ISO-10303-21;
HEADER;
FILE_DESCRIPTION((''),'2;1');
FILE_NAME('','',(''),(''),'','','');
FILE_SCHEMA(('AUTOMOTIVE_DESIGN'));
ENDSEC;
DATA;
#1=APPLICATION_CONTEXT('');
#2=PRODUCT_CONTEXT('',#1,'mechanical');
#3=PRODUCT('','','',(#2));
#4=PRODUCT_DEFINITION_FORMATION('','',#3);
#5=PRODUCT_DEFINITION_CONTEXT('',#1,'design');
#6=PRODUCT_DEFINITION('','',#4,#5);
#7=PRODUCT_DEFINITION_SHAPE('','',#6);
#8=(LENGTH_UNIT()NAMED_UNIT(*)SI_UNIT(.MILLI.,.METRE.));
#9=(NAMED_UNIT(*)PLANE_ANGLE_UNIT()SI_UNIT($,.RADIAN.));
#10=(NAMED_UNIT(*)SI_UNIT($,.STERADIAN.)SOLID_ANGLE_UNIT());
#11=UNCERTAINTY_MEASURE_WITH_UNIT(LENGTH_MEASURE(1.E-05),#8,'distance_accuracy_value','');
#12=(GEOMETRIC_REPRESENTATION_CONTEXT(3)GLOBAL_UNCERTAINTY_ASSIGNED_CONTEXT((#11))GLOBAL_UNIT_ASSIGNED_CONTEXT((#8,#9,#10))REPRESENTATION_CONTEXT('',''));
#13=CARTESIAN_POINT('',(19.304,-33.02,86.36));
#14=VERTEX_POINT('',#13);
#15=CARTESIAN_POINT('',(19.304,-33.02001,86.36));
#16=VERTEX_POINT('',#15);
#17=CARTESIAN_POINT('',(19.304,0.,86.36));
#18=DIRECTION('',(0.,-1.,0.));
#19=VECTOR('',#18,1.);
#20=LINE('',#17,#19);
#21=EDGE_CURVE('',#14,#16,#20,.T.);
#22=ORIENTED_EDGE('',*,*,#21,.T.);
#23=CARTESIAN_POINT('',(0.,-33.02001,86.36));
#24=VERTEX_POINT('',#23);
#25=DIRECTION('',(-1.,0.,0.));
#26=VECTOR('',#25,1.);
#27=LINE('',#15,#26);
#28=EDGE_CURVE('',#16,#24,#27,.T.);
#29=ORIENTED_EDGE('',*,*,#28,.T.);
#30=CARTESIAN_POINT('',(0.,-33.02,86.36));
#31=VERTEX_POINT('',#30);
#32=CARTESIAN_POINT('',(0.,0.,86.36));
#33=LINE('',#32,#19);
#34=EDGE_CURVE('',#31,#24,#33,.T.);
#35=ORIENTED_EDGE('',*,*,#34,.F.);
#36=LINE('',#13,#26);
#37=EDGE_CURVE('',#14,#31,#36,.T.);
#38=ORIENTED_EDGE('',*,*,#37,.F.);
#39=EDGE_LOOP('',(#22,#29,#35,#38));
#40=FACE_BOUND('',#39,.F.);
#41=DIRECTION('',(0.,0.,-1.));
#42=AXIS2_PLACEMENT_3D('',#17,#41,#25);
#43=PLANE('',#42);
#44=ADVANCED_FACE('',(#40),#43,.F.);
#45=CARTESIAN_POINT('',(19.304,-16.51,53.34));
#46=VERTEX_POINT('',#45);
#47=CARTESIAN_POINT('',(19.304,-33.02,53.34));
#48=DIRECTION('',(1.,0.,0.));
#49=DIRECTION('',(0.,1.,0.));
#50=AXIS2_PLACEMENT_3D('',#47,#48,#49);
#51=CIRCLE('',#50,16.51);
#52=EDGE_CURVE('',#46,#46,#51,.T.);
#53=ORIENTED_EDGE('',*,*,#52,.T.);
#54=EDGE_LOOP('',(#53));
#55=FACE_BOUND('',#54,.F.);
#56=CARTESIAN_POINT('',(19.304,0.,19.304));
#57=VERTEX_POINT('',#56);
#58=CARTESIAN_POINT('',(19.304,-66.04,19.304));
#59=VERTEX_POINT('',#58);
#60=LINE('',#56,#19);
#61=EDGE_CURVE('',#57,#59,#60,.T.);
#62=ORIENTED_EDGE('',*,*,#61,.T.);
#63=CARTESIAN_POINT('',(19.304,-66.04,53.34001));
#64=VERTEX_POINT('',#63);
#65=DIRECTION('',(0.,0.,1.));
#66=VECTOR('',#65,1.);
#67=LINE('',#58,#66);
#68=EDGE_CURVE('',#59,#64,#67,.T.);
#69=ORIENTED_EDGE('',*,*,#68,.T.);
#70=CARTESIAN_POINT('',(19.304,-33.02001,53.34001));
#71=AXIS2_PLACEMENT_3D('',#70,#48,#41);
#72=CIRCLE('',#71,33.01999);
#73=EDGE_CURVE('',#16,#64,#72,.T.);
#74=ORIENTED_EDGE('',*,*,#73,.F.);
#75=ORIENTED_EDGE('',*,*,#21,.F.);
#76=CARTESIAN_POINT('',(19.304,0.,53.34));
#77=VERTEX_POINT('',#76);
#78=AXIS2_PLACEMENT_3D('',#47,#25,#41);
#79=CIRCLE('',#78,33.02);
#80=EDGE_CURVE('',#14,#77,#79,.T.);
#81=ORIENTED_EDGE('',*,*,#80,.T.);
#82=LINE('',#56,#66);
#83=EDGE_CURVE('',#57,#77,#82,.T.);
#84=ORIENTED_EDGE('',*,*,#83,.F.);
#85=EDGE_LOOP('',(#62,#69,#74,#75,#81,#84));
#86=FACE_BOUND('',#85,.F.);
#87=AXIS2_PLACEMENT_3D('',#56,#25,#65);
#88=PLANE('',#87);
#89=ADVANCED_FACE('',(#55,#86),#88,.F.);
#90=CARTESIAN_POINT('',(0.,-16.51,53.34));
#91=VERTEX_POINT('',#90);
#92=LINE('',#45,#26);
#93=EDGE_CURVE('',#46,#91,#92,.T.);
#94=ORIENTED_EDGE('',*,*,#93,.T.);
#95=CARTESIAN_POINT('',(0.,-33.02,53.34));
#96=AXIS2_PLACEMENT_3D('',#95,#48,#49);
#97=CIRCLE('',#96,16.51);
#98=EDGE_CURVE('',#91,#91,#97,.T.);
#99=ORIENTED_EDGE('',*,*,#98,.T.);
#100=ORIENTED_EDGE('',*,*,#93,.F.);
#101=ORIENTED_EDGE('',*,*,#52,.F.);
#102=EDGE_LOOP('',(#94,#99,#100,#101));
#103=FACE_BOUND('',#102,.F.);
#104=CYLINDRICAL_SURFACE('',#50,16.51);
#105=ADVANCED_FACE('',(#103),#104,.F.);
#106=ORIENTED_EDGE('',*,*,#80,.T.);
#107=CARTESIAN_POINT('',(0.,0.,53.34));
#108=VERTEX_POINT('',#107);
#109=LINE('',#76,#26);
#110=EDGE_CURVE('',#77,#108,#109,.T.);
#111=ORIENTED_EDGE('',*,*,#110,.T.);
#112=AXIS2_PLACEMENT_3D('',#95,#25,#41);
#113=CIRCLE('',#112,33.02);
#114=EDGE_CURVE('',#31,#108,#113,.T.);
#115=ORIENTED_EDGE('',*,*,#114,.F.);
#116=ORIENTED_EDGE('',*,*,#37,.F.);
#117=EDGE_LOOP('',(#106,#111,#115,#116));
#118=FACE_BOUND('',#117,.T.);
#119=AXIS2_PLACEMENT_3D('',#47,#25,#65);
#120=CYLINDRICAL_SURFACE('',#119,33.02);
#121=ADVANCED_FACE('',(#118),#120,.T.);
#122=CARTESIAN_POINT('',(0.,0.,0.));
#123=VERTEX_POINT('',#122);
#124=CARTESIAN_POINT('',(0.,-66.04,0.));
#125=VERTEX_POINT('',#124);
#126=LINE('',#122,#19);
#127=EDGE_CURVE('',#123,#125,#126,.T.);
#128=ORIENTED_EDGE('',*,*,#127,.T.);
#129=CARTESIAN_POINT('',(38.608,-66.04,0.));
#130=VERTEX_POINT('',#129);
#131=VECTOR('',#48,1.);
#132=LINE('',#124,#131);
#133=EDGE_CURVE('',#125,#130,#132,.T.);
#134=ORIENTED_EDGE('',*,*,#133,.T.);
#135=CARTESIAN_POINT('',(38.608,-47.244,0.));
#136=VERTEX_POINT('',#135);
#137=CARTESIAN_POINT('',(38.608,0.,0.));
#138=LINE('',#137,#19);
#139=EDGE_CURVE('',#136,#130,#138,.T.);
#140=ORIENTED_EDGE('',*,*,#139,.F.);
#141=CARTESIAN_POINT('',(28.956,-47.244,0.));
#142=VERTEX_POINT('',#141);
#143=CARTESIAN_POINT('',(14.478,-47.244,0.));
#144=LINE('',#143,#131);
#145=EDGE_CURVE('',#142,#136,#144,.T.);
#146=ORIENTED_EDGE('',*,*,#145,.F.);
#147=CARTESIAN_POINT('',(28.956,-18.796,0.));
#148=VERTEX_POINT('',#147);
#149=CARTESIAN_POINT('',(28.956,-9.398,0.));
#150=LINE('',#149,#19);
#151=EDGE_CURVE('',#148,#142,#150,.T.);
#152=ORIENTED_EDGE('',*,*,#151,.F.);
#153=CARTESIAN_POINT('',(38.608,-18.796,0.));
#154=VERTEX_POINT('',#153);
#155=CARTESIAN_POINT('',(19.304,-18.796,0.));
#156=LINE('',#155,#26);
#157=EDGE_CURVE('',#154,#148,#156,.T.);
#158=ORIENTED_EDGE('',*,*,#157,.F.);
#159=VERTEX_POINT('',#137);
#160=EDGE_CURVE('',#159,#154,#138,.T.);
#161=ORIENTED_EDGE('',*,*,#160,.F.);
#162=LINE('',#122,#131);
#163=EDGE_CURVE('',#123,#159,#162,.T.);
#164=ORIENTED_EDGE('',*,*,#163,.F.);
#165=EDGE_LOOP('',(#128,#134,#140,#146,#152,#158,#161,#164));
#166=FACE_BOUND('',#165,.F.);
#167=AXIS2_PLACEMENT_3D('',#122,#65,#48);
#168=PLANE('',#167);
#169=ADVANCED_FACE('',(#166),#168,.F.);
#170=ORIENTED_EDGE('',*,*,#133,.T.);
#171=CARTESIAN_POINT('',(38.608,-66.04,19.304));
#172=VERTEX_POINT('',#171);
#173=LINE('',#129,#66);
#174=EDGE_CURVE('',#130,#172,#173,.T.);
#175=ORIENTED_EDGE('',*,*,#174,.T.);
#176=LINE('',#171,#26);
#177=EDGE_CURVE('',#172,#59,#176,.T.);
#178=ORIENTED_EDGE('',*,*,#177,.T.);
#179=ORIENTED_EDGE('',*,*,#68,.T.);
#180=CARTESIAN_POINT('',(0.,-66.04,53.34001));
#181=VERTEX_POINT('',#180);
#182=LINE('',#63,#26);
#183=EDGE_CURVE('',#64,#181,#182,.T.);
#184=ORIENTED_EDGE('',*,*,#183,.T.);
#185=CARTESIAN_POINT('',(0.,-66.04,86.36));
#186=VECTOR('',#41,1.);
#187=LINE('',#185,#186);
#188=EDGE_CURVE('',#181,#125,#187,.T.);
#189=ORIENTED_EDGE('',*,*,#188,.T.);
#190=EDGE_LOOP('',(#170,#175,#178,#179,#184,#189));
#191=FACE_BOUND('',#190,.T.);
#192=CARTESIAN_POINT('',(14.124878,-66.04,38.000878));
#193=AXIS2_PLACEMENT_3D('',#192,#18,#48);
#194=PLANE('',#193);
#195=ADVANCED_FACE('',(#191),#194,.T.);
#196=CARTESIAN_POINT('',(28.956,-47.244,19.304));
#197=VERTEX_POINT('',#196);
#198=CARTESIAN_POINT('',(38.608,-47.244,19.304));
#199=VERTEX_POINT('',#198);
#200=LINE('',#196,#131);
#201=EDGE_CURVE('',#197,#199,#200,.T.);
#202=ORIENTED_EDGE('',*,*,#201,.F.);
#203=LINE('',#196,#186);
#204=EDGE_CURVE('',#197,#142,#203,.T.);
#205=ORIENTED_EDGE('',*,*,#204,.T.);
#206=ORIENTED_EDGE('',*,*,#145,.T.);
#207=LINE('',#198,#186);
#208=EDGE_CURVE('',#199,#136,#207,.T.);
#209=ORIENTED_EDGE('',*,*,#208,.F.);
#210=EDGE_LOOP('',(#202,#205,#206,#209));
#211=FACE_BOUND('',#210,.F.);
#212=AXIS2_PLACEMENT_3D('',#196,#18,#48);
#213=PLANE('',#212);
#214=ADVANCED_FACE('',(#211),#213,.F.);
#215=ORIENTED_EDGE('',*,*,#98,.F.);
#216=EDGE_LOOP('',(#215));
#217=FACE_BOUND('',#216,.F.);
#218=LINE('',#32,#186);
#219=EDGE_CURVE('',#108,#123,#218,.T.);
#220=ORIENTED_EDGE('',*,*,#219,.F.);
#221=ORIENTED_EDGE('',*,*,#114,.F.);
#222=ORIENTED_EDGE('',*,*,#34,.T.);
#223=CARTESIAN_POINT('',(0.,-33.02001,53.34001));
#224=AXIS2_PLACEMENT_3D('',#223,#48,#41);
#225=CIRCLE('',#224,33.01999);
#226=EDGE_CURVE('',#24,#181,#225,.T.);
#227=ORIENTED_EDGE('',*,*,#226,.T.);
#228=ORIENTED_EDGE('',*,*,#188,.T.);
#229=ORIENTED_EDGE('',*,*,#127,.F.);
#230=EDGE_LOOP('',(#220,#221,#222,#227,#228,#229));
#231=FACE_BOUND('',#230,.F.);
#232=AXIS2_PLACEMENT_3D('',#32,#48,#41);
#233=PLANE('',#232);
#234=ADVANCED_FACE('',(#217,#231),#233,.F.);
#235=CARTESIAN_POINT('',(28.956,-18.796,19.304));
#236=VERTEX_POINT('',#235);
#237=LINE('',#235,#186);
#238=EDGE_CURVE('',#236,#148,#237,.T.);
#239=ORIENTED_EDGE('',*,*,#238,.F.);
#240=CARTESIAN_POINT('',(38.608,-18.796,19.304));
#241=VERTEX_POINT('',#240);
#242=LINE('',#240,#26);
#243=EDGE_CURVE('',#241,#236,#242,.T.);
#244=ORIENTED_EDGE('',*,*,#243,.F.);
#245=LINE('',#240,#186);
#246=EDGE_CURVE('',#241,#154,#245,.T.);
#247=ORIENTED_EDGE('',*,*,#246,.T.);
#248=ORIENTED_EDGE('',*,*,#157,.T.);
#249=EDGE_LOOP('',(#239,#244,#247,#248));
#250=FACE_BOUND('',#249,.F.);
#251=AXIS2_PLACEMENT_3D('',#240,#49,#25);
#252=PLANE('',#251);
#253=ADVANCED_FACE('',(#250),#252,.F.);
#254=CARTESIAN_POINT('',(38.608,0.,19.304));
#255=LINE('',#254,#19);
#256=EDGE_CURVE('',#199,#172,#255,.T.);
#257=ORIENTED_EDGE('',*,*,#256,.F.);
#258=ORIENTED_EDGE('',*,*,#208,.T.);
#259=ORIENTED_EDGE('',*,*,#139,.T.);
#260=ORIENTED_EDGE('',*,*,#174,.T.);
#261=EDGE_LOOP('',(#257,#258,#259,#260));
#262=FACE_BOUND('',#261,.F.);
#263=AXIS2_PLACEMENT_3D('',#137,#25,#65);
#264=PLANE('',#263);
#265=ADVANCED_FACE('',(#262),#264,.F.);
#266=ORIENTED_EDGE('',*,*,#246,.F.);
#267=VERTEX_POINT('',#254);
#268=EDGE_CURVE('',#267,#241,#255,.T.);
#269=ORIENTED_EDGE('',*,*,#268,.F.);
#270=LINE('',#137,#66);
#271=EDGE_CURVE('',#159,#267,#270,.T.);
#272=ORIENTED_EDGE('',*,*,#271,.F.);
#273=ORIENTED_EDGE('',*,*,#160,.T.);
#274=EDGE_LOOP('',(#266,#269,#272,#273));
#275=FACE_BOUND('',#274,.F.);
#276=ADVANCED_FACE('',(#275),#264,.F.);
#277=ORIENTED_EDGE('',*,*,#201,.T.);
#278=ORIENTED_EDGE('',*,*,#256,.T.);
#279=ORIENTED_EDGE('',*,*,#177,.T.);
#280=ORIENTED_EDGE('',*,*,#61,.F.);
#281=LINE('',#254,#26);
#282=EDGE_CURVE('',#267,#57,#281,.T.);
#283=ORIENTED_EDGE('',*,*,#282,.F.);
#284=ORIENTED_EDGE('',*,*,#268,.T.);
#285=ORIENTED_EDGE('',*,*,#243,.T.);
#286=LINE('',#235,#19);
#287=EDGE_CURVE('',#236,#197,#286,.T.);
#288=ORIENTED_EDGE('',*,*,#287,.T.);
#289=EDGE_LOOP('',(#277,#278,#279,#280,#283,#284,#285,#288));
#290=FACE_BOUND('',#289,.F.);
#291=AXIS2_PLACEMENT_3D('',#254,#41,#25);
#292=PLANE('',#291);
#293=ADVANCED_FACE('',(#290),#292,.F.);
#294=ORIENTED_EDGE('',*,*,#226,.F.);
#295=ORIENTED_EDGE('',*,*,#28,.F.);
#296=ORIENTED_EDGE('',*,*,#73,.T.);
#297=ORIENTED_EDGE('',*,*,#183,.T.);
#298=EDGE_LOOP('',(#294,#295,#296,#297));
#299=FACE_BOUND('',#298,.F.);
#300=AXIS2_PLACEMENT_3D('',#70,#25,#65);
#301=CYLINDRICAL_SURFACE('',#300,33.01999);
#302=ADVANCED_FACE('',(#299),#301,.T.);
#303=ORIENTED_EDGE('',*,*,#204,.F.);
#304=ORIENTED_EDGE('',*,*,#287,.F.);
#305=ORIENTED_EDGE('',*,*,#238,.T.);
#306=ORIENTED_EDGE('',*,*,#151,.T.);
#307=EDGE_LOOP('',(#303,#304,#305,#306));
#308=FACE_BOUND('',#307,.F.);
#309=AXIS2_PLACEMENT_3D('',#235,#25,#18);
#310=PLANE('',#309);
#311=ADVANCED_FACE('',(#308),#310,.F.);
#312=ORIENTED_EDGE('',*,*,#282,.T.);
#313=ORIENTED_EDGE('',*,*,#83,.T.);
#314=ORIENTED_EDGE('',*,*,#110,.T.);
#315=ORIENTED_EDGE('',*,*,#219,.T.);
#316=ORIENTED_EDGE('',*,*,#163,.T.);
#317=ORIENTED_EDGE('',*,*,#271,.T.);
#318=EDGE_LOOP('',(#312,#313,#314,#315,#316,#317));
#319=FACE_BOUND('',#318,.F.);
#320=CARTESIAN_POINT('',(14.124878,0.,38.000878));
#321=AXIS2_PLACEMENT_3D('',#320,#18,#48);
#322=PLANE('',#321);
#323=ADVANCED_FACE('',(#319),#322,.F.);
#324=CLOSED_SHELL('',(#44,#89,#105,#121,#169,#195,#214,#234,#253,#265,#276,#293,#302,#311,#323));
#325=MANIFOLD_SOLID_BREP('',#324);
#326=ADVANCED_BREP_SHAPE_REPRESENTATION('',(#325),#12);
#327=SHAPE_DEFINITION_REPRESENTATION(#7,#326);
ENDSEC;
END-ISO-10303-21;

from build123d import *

# Parameters (mm, degrees)
F1_DEPTH = 66.04
F2_R     = 33.02
F3_R     = 33.01999
F4_R     = 16.51
F5_DEPTH = 34.544
F7_DEPTH = 25.4


# Not quite as in the source:
# - a fillet or chamfer is up to 0.001 mm smaller than in the source, because OpenCascade refuses the exact size


with BuildPart() as f1:
    # F0 (on Front) → F1 (new body)
    with BuildSketch(Plane.XZ):
        Polygon((0, 86.36), (0, 0), (38.608, 0), (38.608, 19.304), (19.304, 19.304), (19.304, 86.36), align=None)
    extrude(amount=F1_DEPTH)

    # F2
    f2_edges = [f1.edges().sort_by_distance(p)[0] for p in [
        (9.652, 0, 86.36),
    ]]
    fillet(f2_edges, radius=F2_R)

    # F3 (radius 33.02 in the source; OpenCascade refuses exactly that, so slightly less here)
    f3_edges = [f1.edges().sort_by_distance(p)[0] for p in [
        (9.652, -66.04, 86.36),
    ]]
    fillet(f3_edges, radius=F3_R)

    # F4 (on face) → F5 (cut)
    with BuildSketch(Plane.YZ.offset(19.304)):
        with Locations((-33.02, 53.34)):
            Circle(F4_R)
    extrude(amount=-F5_DEPTH, mode=Mode.SUBTRACT)

    # F6 (on face) → F7 (cut)
    with BuildSketch(Plane.XY.offset(19.304)):
        Polygon((38.608, -47.244), (38.608, -33.02), (38.608, -18.796), (28.956, -18.796), (28.956, -47.244), align=None)
    extrude(amount=-F7_DEPTH, mode=Mode.SUBTRACT)


solid = f1.part
